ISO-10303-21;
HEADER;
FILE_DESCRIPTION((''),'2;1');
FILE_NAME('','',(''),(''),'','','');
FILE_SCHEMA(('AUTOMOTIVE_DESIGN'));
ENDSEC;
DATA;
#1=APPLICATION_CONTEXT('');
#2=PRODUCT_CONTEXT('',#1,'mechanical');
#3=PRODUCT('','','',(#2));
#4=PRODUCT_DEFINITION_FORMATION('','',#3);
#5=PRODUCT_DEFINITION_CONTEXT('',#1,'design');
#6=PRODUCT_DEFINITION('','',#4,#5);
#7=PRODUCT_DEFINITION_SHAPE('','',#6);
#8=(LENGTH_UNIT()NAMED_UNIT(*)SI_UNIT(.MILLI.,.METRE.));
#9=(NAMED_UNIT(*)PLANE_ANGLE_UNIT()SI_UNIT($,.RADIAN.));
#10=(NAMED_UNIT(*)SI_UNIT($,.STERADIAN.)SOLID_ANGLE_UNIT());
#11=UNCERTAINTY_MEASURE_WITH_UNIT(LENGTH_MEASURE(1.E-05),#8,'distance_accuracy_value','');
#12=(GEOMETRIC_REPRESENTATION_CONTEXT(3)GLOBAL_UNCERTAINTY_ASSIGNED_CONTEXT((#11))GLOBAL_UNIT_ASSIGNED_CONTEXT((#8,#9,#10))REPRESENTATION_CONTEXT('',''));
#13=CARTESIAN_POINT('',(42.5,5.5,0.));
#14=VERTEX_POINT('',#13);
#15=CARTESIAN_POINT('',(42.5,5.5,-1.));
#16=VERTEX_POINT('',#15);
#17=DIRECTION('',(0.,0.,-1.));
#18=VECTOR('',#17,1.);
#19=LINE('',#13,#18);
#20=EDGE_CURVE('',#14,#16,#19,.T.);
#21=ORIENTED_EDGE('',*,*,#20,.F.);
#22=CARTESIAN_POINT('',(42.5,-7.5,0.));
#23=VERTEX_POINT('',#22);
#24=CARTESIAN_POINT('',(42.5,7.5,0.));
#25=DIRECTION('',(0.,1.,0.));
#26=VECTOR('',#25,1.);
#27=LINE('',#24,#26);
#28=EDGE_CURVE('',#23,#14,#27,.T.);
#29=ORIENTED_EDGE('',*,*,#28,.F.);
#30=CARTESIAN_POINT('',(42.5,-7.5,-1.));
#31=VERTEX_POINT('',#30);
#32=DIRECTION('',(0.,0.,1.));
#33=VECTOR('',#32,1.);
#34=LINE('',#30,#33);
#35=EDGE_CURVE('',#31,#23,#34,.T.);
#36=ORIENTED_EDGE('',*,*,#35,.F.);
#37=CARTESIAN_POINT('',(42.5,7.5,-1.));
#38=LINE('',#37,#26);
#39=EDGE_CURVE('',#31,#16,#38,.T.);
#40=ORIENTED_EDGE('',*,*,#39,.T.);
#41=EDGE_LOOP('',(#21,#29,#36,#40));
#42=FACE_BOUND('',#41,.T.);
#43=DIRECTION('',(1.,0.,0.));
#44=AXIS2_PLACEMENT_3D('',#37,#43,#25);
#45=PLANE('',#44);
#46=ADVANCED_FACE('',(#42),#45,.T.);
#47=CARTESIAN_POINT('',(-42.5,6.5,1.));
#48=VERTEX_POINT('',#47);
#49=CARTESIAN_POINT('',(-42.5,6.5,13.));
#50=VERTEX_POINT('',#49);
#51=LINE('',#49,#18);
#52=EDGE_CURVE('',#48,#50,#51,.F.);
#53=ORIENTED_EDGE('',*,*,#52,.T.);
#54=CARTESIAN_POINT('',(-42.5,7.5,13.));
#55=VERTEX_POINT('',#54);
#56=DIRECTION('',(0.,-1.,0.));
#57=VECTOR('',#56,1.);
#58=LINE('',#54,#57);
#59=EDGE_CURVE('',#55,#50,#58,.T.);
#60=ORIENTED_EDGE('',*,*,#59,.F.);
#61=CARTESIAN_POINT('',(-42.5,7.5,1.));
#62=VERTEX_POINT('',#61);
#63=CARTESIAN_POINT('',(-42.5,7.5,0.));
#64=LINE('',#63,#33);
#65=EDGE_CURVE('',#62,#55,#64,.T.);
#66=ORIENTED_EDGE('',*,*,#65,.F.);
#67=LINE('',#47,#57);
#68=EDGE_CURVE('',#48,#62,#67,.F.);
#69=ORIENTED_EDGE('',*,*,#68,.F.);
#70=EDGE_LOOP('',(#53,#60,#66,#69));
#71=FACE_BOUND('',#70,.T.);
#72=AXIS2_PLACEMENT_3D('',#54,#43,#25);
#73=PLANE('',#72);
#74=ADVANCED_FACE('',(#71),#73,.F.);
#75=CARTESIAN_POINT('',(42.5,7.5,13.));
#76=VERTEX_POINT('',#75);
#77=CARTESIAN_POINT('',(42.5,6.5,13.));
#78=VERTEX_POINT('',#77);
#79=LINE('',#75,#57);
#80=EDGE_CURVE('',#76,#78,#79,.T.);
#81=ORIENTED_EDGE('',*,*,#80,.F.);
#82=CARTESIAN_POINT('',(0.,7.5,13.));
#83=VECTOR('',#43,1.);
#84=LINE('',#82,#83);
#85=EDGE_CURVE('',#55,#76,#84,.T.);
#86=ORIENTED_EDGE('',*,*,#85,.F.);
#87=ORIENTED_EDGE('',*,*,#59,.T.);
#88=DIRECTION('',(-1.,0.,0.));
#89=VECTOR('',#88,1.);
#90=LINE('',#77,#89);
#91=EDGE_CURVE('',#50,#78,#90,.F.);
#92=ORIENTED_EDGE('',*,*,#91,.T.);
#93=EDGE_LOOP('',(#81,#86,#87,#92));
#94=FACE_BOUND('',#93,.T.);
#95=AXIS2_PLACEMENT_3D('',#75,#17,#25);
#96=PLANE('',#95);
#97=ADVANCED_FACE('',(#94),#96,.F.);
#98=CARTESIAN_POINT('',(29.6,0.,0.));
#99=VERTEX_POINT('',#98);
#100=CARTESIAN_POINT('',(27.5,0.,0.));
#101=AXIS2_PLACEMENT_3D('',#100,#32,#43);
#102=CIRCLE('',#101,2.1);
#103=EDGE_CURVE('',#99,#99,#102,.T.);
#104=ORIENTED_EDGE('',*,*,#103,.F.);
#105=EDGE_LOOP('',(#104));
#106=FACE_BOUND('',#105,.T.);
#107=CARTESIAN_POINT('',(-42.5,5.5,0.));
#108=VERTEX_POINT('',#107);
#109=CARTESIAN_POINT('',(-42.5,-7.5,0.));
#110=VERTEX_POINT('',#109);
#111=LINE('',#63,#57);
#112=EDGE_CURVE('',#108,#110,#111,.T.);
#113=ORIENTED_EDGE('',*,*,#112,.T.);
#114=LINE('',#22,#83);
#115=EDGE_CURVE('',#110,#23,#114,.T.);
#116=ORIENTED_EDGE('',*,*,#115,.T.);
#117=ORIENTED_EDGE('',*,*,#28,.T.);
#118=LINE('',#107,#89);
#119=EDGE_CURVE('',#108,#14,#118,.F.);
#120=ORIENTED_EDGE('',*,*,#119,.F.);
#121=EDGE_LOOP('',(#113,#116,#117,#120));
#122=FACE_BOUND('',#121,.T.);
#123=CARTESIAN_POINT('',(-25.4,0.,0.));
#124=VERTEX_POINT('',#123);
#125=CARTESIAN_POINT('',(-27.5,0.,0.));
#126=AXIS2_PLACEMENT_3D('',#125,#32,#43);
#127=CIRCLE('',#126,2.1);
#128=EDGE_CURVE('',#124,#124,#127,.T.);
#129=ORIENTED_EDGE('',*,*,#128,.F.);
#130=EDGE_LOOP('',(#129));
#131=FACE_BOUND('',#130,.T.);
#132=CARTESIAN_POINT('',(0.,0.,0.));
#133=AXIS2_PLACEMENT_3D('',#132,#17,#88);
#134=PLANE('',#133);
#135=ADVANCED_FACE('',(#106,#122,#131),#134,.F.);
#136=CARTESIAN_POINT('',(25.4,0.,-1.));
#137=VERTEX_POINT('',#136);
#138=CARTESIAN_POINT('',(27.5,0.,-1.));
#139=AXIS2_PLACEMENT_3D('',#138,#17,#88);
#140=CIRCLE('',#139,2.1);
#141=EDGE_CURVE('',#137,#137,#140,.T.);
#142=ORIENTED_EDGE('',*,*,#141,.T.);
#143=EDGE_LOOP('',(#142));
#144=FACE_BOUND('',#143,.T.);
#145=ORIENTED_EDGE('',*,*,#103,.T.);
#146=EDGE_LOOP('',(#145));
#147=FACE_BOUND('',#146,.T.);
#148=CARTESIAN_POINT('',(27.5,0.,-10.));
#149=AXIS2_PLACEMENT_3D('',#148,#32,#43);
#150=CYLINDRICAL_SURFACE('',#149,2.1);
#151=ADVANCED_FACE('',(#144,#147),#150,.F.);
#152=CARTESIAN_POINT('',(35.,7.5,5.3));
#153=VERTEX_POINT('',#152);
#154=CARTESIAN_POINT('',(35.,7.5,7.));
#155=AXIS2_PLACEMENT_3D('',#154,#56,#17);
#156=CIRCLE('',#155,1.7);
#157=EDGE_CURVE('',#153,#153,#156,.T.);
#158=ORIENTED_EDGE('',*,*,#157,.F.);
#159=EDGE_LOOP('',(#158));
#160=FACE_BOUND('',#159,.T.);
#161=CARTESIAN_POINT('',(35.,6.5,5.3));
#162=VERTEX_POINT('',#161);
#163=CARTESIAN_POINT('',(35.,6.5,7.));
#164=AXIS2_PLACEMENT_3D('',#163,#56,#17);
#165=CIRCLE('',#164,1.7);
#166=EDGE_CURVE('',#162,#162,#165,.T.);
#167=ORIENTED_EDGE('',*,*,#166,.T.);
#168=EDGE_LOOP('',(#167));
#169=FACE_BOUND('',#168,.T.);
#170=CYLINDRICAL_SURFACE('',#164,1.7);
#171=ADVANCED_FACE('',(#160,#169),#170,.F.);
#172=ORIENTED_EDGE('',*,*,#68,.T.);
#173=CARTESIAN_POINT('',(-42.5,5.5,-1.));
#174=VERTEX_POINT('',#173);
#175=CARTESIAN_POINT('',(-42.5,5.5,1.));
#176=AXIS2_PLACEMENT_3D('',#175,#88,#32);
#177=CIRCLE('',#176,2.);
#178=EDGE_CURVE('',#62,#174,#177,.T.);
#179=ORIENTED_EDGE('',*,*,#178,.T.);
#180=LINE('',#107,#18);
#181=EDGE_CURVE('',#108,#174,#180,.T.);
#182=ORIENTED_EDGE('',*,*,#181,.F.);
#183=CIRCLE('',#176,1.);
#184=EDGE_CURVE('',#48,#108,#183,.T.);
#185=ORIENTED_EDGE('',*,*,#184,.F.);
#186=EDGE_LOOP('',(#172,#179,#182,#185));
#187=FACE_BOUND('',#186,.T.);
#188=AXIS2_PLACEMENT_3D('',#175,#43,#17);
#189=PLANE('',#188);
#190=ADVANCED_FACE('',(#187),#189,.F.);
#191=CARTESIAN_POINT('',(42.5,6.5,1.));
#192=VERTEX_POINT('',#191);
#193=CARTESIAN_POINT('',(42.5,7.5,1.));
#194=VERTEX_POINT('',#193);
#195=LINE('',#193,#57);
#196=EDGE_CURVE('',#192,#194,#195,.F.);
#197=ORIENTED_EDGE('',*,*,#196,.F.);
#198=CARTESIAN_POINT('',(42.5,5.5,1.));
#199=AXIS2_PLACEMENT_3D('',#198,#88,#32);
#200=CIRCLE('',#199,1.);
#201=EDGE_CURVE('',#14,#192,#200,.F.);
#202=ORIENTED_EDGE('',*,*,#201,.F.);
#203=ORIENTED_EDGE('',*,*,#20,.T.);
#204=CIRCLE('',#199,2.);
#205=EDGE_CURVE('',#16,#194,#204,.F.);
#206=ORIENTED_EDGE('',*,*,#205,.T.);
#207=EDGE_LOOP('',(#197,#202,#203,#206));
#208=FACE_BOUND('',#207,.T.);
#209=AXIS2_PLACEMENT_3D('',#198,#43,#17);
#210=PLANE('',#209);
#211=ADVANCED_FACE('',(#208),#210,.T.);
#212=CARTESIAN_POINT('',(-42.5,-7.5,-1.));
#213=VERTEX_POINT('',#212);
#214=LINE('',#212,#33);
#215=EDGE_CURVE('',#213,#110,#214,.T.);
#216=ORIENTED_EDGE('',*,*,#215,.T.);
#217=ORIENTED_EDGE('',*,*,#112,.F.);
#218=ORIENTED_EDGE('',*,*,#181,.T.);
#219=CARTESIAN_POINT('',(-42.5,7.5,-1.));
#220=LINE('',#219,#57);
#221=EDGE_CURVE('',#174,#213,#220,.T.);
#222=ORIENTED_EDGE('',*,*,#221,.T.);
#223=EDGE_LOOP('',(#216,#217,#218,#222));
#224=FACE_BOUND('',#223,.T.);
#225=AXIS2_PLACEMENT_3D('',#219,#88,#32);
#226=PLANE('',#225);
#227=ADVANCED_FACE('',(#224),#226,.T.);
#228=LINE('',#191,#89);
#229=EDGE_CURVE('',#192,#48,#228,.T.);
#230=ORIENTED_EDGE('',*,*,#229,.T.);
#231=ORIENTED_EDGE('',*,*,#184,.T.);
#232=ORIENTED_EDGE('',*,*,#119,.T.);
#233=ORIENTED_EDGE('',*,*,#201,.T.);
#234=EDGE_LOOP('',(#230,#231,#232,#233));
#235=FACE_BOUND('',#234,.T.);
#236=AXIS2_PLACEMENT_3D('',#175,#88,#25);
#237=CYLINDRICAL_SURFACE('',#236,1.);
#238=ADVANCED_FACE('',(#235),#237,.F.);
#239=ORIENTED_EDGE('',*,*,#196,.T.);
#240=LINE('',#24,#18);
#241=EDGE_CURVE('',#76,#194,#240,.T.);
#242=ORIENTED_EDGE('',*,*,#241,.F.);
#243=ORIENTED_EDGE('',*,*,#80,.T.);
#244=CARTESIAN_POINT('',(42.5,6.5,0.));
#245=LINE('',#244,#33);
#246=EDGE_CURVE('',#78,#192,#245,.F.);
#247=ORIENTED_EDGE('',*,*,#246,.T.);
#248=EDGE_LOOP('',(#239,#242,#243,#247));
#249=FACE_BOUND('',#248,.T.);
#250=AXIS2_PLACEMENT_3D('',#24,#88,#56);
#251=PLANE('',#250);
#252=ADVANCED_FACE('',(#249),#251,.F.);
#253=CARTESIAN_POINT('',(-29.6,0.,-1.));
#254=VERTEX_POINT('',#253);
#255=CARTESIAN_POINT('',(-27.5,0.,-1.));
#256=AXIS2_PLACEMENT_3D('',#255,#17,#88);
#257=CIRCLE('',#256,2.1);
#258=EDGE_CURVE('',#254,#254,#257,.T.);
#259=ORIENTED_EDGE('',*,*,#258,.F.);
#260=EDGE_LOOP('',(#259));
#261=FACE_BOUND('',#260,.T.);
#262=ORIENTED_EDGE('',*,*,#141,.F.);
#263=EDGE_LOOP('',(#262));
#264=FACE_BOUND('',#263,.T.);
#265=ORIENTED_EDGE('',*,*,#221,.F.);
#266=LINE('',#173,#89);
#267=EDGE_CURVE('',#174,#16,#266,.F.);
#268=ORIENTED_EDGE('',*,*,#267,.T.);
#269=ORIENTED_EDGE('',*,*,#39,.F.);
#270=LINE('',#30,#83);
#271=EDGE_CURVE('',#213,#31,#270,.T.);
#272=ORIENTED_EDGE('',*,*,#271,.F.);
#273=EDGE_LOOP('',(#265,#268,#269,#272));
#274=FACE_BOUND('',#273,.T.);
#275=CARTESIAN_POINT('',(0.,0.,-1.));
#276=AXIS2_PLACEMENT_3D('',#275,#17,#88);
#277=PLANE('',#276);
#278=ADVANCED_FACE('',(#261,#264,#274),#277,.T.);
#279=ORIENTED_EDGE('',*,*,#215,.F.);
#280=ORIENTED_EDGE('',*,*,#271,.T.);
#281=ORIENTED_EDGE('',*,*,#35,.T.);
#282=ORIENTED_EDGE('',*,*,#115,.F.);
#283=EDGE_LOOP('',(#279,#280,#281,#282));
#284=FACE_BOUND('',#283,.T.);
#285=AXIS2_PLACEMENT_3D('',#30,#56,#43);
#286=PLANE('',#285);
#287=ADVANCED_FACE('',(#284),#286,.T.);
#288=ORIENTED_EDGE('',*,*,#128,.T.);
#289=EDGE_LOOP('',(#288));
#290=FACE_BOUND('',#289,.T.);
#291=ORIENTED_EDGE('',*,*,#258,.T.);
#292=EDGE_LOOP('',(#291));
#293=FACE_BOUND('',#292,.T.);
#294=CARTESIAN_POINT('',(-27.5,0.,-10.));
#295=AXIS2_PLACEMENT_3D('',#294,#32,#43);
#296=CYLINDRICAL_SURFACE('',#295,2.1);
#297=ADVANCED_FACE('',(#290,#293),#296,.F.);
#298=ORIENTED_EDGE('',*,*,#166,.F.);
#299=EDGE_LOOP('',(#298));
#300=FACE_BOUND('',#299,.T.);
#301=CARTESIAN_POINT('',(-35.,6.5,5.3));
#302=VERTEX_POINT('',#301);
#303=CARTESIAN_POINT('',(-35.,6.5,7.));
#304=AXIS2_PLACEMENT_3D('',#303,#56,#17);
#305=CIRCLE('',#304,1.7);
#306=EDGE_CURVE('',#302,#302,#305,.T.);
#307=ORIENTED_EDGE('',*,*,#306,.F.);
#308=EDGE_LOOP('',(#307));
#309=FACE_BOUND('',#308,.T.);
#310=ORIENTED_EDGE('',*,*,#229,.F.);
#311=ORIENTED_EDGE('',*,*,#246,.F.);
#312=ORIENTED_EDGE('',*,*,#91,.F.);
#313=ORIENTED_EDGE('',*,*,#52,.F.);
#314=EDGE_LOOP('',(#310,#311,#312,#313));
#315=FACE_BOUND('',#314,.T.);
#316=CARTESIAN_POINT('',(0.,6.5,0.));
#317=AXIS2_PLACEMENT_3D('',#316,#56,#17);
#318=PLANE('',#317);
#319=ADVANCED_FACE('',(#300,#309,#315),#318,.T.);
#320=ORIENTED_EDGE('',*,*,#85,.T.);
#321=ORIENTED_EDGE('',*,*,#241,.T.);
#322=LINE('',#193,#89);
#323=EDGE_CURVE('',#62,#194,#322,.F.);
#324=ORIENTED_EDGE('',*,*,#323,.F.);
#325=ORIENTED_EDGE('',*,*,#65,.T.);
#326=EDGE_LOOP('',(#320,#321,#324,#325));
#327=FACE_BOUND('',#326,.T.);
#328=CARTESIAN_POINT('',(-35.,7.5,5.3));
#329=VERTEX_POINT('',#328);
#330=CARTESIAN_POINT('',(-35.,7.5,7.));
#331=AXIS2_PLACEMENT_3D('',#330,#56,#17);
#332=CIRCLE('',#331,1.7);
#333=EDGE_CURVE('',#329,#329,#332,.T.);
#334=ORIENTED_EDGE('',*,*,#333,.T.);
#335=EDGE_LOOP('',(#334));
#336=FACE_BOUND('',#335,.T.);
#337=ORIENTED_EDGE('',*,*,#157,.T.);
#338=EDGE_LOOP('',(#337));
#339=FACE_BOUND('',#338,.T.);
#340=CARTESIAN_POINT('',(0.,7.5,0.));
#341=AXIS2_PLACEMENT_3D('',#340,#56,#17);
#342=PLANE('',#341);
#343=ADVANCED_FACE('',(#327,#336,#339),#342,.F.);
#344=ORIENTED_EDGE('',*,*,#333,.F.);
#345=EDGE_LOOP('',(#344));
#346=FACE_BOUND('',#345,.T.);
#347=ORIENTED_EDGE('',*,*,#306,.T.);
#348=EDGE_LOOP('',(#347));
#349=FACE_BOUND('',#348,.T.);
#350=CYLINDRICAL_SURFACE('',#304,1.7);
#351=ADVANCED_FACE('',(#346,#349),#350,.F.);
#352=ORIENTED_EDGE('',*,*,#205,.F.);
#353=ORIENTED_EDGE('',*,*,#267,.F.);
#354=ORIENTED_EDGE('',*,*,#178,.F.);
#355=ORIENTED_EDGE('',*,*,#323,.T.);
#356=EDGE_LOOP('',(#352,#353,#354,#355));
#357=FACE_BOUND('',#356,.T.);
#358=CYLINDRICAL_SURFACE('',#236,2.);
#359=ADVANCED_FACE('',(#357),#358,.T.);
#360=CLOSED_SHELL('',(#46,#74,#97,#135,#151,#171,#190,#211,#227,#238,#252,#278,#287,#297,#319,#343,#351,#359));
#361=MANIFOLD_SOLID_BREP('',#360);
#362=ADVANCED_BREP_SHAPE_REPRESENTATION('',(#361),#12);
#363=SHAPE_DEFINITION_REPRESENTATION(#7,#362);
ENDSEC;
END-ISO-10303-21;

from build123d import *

# Parameters (mm, degrees)
SKETCH_1_W                       = 85
SKETCH_1_H                       = 15
SM_BASE_FLANGE_1_DEPTH           = 1
SM_EDGE_FLANGE_1_STRIP_W         = 6
SM_EDGE_FLANGE_1_STRIP_H         = 1
SM_EDGE_FLANGE_1_STRIP_CUT_DEPTH = 85
SM_EDGE_FLANGE_1_DEPTH           = 85
SKETCH_9_R                       = 2.1
CUT_EXTRUDE_1_DEPTH              = 10
HOLE_WIZARD_M31_D                = 3.4
HOLE_WIZARD_M31_DEPTH            = 18.5
HOLE_WIZARD_M31_TIP              = 1.021463052


# Sheet-metal steps are written as plain solids
with BuildPart() as part:
    # Sketch 1 → Базовая кромка1 (new body)
    with BuildSketch(Plane.XY):
        Rectangle(SKETCH_1_W, SKETCH_1_H)
    extrude(amount=-SM_BASE_FLANGE_1_DEPTH)

    # Ребро-кромка1 strip (across the edge) → Ребро-кромка1 strip cut (cut)
    with BuildSketch(Plane(origin=(42.5, 7.5, 0), x_dir=(0, -1, 0), z_dir=(-1, 0, 0))):
        with Locations((-1, -0.5)):
            Rectangle(SM_EDGE_FLANGE_1_STRIP_W, SM_EDGE_FLANGE_1_STRIP_H)
    extrude(amount=SM_EDGE_FLANGE_1_STRIP_CUT_DEPTH, mode=Mode.SUBTRACT)

    # Ребро-кромка1 section (across the edge) → Ребро-кромка1 (add)
    with BuildSketch(Plane(origin=(42.5, 7.5, 0), x_dir=(0, -1, 0), z_dir=(-1, 0, 0))):
        with BuildLine():
            Line((0, 1), (0, 13))
            Line((0, 13), (1, 13))
            Line((1, 13), (1, 1))
            ThreePointArc((1, 1), (1.292893219, 0.292893219), (2, 0))
            Line((2, 0), (2, -1))
            ThreePointArc((2, -1), (0.585786438, -0.414213562), (0, 1))
        make_face()
    extrude(amount=SM_EDGE_FLANGE_1_DEPTH)

    # Эскиз9 → Вырез-Вытянуть1 (cut)
    with BuildSketch(Plane.XY):
        with Locations((-27.5, 0)):
            Circle(SKETCH_9_R)
        with Locations((27.5, 0)):
            Circle(SKETCH_9_R)
    extrude(amount=-CUT_EXTRUDE_1_DEPTH, mode=Mode.SUBTRACT)

    # Отверстие с зазором M31
    with Locations(Plane(origin=(0, 6.5, 0), x_dir=(-1, 0, 0), z_dir=(0, -1, 0))):
        with Locations((-35, -7), (35, -7)):
            Hole(HOLE_WIZARD_M31_D / 2, depth=HOLE_WIZARD_M31_DEPTH)
            with Locations((0, 0, -(HOLE_WIZARD_M31_DEPTH + HOLE_WIZARD_M31_TIP / 2))):  # 118° drill point
                Cone(0, HOLE_WIZARD_M31_D / 2, HOLE_WIZARD_M31_TIP, mode=Mode.SUBTRACT)


solid = part.part
